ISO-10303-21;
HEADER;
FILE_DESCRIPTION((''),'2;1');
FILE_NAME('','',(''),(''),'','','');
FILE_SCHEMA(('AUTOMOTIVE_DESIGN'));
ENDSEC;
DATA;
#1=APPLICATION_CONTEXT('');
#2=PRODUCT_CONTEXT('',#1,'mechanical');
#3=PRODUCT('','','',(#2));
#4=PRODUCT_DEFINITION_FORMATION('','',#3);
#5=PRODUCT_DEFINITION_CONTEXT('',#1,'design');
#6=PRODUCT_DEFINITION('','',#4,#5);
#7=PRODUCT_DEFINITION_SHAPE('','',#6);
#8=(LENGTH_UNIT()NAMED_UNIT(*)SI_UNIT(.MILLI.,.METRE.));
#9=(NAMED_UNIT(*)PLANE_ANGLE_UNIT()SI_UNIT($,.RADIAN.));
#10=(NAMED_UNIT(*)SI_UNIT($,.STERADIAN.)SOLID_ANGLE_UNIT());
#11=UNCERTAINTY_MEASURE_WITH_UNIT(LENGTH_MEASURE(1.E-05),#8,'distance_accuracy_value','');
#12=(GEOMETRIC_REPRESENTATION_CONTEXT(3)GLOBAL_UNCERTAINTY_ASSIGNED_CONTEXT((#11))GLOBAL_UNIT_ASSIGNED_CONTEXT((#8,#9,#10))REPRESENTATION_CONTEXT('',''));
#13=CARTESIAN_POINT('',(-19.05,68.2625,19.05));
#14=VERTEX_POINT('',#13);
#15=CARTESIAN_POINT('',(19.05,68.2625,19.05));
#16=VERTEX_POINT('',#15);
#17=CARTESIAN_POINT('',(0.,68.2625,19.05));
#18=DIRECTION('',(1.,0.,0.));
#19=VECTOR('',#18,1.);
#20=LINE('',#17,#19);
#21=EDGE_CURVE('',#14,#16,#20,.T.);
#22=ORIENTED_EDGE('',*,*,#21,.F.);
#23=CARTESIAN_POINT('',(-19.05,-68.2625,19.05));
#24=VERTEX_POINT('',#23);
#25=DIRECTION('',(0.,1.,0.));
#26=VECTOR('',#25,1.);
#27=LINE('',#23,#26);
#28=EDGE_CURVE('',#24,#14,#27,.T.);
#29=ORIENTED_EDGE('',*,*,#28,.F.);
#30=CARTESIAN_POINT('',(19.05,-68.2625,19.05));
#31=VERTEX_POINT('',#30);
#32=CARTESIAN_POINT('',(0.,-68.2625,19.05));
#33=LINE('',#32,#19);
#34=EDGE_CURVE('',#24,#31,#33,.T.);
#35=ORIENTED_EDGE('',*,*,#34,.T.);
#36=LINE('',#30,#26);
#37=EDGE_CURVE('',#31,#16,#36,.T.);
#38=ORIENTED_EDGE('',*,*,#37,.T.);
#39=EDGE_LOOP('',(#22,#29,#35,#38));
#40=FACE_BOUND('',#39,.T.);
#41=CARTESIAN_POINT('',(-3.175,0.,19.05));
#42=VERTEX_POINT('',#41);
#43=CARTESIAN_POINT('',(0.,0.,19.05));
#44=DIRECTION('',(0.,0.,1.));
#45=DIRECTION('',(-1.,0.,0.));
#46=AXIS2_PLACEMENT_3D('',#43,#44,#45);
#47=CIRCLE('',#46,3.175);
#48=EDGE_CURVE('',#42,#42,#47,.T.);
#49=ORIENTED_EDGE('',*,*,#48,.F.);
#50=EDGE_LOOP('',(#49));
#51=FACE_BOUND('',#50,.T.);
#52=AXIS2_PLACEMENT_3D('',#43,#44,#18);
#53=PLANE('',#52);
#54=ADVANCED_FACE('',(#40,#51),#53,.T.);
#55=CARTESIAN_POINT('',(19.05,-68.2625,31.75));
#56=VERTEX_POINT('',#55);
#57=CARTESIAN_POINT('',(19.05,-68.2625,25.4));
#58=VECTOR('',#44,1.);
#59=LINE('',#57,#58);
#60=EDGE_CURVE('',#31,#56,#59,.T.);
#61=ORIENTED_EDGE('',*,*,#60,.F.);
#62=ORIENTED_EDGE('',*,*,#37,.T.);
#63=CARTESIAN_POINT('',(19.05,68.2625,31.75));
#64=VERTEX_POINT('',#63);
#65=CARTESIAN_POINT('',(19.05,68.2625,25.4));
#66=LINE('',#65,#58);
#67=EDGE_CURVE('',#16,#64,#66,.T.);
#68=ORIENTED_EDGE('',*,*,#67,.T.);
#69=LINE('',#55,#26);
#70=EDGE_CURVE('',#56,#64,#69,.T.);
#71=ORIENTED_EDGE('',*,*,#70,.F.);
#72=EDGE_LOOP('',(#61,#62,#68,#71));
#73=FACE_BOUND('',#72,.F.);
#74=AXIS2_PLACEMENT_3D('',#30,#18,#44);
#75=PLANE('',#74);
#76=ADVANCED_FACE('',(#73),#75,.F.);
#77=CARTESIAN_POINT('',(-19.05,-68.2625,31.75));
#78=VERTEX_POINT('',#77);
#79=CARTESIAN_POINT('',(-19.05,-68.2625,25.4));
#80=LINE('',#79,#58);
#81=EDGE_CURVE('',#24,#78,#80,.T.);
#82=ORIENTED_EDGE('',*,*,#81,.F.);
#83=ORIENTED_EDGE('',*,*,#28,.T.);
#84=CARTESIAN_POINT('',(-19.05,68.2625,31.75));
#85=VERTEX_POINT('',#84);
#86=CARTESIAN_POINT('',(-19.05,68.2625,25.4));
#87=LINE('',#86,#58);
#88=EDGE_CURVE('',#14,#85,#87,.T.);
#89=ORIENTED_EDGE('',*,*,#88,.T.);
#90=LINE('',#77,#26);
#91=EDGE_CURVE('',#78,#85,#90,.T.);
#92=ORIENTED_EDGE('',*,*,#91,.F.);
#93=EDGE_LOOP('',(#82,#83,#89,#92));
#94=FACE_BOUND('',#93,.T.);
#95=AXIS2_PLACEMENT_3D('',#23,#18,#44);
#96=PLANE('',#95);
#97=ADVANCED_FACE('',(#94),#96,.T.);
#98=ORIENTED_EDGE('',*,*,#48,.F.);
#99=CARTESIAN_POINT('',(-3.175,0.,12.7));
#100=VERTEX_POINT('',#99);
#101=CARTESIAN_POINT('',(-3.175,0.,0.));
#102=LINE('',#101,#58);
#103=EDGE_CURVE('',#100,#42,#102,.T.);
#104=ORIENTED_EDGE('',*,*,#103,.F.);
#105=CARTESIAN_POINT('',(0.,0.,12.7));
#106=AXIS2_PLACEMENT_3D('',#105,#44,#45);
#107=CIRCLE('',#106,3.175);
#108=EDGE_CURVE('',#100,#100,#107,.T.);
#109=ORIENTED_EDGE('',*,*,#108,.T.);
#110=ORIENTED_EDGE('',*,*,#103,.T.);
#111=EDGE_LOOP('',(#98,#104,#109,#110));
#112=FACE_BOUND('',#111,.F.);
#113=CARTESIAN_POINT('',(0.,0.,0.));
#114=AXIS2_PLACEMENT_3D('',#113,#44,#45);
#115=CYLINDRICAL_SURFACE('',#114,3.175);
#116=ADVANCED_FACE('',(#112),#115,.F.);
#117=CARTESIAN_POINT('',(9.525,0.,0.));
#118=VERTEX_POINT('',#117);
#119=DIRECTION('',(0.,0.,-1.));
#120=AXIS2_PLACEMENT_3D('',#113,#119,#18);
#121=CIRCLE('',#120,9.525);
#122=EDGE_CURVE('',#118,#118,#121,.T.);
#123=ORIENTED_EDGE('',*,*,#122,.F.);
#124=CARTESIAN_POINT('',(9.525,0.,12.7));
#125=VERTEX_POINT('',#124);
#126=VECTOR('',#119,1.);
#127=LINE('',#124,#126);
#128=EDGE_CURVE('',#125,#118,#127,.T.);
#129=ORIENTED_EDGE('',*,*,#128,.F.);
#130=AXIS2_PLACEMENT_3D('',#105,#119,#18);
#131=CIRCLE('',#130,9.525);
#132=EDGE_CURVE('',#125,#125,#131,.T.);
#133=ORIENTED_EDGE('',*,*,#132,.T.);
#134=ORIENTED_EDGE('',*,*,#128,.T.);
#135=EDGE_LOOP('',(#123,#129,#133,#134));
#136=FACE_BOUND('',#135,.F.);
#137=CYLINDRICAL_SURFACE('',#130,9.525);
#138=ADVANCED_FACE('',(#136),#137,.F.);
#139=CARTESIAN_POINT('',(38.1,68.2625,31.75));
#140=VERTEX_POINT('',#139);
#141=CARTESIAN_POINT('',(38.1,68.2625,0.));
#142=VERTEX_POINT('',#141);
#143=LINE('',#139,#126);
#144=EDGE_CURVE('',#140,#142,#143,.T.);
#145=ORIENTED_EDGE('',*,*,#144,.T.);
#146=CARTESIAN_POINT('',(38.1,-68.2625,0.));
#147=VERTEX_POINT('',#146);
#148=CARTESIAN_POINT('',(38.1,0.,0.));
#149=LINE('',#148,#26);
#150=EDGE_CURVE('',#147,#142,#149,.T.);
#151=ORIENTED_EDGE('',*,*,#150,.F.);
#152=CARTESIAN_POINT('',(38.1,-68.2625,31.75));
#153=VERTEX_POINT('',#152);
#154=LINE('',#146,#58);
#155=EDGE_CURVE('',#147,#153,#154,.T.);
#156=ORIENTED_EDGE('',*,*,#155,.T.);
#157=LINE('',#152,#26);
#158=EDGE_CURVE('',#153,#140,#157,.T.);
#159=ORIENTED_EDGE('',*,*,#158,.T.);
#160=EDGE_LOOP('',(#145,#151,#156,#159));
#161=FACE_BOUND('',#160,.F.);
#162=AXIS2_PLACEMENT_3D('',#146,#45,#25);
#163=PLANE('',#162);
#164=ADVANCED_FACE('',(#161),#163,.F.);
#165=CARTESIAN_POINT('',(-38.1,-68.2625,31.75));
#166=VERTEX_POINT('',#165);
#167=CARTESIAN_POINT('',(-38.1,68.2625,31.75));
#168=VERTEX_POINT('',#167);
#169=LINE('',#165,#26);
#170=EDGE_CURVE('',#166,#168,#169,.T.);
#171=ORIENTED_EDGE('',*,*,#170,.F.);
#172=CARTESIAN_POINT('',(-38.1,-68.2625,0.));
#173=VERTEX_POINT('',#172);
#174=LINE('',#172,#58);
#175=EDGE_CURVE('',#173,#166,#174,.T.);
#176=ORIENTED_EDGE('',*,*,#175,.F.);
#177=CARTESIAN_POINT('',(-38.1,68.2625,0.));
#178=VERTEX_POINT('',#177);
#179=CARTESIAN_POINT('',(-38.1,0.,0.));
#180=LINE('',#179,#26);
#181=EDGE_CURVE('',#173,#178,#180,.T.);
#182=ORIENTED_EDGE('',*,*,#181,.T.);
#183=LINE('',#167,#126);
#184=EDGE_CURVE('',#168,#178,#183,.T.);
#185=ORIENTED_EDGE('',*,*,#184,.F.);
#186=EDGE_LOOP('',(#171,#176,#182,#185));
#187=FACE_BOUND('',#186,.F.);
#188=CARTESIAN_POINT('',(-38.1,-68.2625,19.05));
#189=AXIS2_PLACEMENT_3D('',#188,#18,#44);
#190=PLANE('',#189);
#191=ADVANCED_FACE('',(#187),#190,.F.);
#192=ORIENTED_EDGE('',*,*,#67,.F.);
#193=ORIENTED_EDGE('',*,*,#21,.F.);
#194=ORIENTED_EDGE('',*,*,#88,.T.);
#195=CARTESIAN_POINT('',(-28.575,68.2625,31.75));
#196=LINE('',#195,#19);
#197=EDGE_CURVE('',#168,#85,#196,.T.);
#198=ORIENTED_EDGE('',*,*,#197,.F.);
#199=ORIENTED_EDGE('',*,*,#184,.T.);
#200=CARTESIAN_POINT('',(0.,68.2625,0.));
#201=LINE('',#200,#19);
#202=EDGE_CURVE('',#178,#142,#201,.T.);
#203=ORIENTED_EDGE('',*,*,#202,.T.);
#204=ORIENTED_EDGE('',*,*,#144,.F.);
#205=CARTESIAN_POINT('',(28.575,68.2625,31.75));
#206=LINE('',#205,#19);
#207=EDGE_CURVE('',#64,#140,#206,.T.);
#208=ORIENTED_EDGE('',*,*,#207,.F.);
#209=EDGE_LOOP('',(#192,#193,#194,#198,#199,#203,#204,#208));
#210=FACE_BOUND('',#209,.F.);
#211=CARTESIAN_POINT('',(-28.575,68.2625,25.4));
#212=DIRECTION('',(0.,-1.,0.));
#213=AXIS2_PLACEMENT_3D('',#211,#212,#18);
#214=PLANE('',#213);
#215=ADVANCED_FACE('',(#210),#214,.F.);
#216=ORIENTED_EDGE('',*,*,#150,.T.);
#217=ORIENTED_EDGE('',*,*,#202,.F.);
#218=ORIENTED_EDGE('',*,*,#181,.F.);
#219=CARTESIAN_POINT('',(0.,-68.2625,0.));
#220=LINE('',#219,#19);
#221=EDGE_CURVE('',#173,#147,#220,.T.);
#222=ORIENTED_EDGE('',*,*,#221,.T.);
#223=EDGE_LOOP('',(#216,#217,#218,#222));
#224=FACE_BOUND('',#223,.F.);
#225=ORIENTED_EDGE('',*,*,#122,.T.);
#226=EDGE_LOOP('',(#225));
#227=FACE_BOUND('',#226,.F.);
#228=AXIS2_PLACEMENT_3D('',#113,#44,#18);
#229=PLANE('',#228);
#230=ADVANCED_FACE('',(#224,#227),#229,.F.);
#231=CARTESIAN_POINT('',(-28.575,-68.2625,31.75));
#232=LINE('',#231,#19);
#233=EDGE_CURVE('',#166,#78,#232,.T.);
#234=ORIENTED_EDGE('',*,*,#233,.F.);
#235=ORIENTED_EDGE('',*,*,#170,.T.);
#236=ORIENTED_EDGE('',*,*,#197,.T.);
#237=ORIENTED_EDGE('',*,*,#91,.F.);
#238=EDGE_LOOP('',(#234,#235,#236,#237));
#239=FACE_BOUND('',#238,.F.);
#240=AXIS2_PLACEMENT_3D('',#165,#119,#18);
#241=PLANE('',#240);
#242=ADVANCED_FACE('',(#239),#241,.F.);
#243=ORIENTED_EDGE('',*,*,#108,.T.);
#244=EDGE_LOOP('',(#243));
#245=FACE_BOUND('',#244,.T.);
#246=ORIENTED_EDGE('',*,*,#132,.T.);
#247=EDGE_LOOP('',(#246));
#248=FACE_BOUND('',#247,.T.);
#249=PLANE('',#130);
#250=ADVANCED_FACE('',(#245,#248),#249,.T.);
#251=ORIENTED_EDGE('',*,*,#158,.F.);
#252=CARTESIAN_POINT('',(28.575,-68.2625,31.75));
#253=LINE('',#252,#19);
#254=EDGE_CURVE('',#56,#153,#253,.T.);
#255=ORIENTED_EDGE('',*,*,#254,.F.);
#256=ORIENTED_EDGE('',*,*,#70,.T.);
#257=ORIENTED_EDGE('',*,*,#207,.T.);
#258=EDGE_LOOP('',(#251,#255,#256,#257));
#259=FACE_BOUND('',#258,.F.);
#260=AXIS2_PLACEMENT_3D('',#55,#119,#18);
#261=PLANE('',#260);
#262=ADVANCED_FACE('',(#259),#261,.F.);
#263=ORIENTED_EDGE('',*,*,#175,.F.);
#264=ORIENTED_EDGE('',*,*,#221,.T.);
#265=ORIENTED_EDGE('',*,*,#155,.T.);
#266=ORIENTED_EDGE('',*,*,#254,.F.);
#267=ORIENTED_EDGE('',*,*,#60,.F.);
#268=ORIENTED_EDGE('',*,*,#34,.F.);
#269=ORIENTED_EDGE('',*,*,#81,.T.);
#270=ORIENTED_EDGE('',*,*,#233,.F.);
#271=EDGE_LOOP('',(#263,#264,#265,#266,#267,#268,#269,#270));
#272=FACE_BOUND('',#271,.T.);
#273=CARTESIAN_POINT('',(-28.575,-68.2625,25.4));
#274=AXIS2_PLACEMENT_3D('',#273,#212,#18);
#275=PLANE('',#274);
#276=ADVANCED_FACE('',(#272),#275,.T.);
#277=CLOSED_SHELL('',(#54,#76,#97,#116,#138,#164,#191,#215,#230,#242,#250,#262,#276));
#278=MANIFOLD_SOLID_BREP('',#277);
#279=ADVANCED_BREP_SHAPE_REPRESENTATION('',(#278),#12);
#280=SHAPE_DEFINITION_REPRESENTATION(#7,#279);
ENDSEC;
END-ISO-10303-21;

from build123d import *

# Parameters (mm, degrees)
F0_W           = 76.2
F0_H           = 136.525
F1_DEPTH       = 19.05
F2_W           = 19.05
F2_H           = 12.7
F3_DEPTH       = 136.525
F5_D           = 6.35
F5_CBORE_D     = 19.05
F5_CBORE_DEPTH = 12.7


# Not quite as in the source:
# - a length typed as a fraction of an inch, garbled in the dataset ("3 / 203.2 mm" for 3/8 in), is restored


with BuildPart() as f1:
    # F0 (on Top) → F1 (new body)
    with BuildSketch(Plane.XY):
        Rectangle(F0_W, F0_H)
    extrude(amount=F1_DEPTH)

    # F2 (on face) → F3 (join)
    with BuildSketch(Plane.XZ.offset(68.2625)):
        with Locations((-28.575, 25.4)):
            Rectangle(F2_W, F2_H)
        with Locations((28.575, 25.4)):
            Rectangle(F2_W, F2_H)
    extrude(amount=-F3_DEPTH)

    # F5 (through all)
    with Locations(Plane(origin=(0, 0, 0), x_dir=(1, 0, 0), z_dir=(0, 0, -1))):
        with Locations((0, 0)):
            CounterBoreHole(F5_D / 2, F5_CBORE_D / 2, F5_CBORE_DEPTH)


solid = f1.part
